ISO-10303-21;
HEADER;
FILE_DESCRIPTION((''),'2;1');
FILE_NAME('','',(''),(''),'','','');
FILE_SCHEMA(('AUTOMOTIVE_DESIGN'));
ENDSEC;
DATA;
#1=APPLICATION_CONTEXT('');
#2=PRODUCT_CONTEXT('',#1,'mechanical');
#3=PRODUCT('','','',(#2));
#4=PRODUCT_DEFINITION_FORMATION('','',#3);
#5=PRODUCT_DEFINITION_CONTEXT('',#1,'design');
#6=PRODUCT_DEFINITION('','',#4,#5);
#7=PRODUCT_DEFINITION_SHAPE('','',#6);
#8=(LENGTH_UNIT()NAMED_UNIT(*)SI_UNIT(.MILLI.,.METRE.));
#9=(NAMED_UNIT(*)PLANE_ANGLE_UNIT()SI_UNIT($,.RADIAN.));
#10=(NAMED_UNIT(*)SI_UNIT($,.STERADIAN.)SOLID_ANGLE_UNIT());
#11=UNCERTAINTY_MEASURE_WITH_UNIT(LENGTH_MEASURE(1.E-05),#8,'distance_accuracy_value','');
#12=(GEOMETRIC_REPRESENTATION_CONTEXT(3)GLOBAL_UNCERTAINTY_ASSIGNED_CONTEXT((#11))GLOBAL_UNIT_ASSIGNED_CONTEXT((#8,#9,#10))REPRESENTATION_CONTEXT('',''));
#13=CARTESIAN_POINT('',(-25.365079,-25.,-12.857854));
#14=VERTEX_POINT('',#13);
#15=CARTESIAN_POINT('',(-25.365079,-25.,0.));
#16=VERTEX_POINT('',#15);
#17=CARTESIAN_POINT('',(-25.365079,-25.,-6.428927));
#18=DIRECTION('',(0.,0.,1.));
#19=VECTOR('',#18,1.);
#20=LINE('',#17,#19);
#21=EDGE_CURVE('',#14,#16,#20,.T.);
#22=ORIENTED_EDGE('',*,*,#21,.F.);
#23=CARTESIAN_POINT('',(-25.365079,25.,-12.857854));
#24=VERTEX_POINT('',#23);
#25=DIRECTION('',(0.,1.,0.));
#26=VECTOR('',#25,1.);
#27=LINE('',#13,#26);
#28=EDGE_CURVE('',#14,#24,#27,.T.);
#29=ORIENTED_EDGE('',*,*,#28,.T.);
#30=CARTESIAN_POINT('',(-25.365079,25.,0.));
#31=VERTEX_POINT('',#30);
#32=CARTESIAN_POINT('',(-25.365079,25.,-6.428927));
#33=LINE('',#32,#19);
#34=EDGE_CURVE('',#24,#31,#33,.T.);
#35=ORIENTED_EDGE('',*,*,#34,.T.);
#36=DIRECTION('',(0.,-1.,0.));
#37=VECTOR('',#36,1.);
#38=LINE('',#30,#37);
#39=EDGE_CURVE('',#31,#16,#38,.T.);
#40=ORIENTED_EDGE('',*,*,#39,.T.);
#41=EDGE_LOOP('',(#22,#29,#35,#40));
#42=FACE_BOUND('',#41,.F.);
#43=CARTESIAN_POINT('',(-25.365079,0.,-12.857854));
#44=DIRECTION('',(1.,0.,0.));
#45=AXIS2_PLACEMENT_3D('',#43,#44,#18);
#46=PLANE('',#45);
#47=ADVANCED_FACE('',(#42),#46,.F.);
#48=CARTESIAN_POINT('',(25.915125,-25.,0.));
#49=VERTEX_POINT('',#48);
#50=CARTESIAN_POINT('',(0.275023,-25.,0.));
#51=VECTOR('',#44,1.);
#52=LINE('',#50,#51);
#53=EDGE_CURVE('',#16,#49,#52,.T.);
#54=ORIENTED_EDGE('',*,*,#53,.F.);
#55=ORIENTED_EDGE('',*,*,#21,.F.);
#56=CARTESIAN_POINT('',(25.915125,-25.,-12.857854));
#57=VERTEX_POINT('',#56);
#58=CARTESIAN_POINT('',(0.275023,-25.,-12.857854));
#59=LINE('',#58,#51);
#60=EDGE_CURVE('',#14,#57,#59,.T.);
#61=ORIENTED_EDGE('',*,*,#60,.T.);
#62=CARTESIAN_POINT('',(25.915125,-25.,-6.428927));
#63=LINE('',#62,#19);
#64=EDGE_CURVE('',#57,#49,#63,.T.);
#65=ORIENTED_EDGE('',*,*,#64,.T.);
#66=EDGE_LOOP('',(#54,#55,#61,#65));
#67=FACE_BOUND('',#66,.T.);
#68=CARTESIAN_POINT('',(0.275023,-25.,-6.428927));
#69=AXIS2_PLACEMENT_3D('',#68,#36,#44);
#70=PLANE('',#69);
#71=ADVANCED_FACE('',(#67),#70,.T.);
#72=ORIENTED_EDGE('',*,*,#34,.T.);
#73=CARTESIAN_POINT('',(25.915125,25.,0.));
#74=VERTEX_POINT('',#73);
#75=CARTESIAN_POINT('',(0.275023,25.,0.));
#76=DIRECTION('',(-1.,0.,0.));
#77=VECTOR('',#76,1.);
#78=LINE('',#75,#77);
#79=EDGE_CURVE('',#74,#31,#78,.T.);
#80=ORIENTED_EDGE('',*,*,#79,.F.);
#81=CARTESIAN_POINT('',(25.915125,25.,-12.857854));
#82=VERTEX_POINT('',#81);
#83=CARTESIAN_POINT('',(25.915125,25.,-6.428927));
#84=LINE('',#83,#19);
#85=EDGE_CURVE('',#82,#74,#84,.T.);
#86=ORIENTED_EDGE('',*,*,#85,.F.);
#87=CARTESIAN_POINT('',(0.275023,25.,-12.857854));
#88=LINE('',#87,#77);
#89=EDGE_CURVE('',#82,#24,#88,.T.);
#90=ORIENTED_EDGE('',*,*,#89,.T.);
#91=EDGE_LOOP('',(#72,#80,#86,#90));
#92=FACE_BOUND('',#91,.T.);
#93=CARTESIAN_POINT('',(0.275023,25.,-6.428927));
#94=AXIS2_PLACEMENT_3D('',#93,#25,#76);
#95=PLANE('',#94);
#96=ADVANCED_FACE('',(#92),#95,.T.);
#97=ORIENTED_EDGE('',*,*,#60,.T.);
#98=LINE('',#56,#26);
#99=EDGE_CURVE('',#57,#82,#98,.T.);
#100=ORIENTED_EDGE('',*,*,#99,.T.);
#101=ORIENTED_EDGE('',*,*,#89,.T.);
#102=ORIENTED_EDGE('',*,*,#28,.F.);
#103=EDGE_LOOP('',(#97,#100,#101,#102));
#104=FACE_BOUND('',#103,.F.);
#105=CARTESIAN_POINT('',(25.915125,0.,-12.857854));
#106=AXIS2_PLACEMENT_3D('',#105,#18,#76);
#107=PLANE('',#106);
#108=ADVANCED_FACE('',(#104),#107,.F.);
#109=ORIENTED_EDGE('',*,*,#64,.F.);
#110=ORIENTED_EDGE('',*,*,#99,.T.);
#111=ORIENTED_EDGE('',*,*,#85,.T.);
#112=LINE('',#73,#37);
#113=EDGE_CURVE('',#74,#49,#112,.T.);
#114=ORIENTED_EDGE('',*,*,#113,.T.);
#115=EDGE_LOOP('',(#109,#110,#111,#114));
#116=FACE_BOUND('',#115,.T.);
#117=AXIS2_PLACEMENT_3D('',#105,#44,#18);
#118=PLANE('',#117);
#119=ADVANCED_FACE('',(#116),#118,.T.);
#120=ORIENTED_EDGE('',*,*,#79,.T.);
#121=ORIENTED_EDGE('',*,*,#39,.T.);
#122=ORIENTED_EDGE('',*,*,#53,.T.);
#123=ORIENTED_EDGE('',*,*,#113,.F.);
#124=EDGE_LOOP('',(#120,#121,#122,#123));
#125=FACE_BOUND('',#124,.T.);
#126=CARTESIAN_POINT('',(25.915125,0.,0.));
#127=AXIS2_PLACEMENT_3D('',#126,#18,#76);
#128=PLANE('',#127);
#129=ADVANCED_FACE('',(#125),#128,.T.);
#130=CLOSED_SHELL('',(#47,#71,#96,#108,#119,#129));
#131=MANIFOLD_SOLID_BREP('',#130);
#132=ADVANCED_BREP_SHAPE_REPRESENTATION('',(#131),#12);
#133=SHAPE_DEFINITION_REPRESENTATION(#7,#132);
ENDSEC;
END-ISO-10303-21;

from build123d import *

# Parameters (mm, degrees)
F3_W     = 51.2802042067
F3_H     = 12.8578543663
F4_DEPTH = 25
F5_W     = 51.2802042067
F5_H     = 12.8578543663
F6_DEPTH = 25


# Not quite as in the source:
# - a feature names something its author has since deleted; it is built from what else it names
# - the program builds the solid bodies; features that only make, move or delete a surface that nothing else refers to are left out


with BuildPart() as f4:
    # F3 (on Front) → F4 (new body)
    with BuildSketch(Plane.XZ):
        with Locations((0.2750232816, -6.4289271832)):
            Rectangle(F3_W, F3_H)
    extrude(amount=F4_DEPTH)

    # F5 (on face) → F6 (join)
    with BuildSketch(Plane(origin=(0, 0, 0), x_dir=(-1, 0, 0), z_dir=(0, 1, 0))):
        with Locations((-0.2750232816, -6.4289271832)):
            Rectangle(F5_W, F5_H)
    extrude(amount=F6_DEPTH)


solid = f4.part
